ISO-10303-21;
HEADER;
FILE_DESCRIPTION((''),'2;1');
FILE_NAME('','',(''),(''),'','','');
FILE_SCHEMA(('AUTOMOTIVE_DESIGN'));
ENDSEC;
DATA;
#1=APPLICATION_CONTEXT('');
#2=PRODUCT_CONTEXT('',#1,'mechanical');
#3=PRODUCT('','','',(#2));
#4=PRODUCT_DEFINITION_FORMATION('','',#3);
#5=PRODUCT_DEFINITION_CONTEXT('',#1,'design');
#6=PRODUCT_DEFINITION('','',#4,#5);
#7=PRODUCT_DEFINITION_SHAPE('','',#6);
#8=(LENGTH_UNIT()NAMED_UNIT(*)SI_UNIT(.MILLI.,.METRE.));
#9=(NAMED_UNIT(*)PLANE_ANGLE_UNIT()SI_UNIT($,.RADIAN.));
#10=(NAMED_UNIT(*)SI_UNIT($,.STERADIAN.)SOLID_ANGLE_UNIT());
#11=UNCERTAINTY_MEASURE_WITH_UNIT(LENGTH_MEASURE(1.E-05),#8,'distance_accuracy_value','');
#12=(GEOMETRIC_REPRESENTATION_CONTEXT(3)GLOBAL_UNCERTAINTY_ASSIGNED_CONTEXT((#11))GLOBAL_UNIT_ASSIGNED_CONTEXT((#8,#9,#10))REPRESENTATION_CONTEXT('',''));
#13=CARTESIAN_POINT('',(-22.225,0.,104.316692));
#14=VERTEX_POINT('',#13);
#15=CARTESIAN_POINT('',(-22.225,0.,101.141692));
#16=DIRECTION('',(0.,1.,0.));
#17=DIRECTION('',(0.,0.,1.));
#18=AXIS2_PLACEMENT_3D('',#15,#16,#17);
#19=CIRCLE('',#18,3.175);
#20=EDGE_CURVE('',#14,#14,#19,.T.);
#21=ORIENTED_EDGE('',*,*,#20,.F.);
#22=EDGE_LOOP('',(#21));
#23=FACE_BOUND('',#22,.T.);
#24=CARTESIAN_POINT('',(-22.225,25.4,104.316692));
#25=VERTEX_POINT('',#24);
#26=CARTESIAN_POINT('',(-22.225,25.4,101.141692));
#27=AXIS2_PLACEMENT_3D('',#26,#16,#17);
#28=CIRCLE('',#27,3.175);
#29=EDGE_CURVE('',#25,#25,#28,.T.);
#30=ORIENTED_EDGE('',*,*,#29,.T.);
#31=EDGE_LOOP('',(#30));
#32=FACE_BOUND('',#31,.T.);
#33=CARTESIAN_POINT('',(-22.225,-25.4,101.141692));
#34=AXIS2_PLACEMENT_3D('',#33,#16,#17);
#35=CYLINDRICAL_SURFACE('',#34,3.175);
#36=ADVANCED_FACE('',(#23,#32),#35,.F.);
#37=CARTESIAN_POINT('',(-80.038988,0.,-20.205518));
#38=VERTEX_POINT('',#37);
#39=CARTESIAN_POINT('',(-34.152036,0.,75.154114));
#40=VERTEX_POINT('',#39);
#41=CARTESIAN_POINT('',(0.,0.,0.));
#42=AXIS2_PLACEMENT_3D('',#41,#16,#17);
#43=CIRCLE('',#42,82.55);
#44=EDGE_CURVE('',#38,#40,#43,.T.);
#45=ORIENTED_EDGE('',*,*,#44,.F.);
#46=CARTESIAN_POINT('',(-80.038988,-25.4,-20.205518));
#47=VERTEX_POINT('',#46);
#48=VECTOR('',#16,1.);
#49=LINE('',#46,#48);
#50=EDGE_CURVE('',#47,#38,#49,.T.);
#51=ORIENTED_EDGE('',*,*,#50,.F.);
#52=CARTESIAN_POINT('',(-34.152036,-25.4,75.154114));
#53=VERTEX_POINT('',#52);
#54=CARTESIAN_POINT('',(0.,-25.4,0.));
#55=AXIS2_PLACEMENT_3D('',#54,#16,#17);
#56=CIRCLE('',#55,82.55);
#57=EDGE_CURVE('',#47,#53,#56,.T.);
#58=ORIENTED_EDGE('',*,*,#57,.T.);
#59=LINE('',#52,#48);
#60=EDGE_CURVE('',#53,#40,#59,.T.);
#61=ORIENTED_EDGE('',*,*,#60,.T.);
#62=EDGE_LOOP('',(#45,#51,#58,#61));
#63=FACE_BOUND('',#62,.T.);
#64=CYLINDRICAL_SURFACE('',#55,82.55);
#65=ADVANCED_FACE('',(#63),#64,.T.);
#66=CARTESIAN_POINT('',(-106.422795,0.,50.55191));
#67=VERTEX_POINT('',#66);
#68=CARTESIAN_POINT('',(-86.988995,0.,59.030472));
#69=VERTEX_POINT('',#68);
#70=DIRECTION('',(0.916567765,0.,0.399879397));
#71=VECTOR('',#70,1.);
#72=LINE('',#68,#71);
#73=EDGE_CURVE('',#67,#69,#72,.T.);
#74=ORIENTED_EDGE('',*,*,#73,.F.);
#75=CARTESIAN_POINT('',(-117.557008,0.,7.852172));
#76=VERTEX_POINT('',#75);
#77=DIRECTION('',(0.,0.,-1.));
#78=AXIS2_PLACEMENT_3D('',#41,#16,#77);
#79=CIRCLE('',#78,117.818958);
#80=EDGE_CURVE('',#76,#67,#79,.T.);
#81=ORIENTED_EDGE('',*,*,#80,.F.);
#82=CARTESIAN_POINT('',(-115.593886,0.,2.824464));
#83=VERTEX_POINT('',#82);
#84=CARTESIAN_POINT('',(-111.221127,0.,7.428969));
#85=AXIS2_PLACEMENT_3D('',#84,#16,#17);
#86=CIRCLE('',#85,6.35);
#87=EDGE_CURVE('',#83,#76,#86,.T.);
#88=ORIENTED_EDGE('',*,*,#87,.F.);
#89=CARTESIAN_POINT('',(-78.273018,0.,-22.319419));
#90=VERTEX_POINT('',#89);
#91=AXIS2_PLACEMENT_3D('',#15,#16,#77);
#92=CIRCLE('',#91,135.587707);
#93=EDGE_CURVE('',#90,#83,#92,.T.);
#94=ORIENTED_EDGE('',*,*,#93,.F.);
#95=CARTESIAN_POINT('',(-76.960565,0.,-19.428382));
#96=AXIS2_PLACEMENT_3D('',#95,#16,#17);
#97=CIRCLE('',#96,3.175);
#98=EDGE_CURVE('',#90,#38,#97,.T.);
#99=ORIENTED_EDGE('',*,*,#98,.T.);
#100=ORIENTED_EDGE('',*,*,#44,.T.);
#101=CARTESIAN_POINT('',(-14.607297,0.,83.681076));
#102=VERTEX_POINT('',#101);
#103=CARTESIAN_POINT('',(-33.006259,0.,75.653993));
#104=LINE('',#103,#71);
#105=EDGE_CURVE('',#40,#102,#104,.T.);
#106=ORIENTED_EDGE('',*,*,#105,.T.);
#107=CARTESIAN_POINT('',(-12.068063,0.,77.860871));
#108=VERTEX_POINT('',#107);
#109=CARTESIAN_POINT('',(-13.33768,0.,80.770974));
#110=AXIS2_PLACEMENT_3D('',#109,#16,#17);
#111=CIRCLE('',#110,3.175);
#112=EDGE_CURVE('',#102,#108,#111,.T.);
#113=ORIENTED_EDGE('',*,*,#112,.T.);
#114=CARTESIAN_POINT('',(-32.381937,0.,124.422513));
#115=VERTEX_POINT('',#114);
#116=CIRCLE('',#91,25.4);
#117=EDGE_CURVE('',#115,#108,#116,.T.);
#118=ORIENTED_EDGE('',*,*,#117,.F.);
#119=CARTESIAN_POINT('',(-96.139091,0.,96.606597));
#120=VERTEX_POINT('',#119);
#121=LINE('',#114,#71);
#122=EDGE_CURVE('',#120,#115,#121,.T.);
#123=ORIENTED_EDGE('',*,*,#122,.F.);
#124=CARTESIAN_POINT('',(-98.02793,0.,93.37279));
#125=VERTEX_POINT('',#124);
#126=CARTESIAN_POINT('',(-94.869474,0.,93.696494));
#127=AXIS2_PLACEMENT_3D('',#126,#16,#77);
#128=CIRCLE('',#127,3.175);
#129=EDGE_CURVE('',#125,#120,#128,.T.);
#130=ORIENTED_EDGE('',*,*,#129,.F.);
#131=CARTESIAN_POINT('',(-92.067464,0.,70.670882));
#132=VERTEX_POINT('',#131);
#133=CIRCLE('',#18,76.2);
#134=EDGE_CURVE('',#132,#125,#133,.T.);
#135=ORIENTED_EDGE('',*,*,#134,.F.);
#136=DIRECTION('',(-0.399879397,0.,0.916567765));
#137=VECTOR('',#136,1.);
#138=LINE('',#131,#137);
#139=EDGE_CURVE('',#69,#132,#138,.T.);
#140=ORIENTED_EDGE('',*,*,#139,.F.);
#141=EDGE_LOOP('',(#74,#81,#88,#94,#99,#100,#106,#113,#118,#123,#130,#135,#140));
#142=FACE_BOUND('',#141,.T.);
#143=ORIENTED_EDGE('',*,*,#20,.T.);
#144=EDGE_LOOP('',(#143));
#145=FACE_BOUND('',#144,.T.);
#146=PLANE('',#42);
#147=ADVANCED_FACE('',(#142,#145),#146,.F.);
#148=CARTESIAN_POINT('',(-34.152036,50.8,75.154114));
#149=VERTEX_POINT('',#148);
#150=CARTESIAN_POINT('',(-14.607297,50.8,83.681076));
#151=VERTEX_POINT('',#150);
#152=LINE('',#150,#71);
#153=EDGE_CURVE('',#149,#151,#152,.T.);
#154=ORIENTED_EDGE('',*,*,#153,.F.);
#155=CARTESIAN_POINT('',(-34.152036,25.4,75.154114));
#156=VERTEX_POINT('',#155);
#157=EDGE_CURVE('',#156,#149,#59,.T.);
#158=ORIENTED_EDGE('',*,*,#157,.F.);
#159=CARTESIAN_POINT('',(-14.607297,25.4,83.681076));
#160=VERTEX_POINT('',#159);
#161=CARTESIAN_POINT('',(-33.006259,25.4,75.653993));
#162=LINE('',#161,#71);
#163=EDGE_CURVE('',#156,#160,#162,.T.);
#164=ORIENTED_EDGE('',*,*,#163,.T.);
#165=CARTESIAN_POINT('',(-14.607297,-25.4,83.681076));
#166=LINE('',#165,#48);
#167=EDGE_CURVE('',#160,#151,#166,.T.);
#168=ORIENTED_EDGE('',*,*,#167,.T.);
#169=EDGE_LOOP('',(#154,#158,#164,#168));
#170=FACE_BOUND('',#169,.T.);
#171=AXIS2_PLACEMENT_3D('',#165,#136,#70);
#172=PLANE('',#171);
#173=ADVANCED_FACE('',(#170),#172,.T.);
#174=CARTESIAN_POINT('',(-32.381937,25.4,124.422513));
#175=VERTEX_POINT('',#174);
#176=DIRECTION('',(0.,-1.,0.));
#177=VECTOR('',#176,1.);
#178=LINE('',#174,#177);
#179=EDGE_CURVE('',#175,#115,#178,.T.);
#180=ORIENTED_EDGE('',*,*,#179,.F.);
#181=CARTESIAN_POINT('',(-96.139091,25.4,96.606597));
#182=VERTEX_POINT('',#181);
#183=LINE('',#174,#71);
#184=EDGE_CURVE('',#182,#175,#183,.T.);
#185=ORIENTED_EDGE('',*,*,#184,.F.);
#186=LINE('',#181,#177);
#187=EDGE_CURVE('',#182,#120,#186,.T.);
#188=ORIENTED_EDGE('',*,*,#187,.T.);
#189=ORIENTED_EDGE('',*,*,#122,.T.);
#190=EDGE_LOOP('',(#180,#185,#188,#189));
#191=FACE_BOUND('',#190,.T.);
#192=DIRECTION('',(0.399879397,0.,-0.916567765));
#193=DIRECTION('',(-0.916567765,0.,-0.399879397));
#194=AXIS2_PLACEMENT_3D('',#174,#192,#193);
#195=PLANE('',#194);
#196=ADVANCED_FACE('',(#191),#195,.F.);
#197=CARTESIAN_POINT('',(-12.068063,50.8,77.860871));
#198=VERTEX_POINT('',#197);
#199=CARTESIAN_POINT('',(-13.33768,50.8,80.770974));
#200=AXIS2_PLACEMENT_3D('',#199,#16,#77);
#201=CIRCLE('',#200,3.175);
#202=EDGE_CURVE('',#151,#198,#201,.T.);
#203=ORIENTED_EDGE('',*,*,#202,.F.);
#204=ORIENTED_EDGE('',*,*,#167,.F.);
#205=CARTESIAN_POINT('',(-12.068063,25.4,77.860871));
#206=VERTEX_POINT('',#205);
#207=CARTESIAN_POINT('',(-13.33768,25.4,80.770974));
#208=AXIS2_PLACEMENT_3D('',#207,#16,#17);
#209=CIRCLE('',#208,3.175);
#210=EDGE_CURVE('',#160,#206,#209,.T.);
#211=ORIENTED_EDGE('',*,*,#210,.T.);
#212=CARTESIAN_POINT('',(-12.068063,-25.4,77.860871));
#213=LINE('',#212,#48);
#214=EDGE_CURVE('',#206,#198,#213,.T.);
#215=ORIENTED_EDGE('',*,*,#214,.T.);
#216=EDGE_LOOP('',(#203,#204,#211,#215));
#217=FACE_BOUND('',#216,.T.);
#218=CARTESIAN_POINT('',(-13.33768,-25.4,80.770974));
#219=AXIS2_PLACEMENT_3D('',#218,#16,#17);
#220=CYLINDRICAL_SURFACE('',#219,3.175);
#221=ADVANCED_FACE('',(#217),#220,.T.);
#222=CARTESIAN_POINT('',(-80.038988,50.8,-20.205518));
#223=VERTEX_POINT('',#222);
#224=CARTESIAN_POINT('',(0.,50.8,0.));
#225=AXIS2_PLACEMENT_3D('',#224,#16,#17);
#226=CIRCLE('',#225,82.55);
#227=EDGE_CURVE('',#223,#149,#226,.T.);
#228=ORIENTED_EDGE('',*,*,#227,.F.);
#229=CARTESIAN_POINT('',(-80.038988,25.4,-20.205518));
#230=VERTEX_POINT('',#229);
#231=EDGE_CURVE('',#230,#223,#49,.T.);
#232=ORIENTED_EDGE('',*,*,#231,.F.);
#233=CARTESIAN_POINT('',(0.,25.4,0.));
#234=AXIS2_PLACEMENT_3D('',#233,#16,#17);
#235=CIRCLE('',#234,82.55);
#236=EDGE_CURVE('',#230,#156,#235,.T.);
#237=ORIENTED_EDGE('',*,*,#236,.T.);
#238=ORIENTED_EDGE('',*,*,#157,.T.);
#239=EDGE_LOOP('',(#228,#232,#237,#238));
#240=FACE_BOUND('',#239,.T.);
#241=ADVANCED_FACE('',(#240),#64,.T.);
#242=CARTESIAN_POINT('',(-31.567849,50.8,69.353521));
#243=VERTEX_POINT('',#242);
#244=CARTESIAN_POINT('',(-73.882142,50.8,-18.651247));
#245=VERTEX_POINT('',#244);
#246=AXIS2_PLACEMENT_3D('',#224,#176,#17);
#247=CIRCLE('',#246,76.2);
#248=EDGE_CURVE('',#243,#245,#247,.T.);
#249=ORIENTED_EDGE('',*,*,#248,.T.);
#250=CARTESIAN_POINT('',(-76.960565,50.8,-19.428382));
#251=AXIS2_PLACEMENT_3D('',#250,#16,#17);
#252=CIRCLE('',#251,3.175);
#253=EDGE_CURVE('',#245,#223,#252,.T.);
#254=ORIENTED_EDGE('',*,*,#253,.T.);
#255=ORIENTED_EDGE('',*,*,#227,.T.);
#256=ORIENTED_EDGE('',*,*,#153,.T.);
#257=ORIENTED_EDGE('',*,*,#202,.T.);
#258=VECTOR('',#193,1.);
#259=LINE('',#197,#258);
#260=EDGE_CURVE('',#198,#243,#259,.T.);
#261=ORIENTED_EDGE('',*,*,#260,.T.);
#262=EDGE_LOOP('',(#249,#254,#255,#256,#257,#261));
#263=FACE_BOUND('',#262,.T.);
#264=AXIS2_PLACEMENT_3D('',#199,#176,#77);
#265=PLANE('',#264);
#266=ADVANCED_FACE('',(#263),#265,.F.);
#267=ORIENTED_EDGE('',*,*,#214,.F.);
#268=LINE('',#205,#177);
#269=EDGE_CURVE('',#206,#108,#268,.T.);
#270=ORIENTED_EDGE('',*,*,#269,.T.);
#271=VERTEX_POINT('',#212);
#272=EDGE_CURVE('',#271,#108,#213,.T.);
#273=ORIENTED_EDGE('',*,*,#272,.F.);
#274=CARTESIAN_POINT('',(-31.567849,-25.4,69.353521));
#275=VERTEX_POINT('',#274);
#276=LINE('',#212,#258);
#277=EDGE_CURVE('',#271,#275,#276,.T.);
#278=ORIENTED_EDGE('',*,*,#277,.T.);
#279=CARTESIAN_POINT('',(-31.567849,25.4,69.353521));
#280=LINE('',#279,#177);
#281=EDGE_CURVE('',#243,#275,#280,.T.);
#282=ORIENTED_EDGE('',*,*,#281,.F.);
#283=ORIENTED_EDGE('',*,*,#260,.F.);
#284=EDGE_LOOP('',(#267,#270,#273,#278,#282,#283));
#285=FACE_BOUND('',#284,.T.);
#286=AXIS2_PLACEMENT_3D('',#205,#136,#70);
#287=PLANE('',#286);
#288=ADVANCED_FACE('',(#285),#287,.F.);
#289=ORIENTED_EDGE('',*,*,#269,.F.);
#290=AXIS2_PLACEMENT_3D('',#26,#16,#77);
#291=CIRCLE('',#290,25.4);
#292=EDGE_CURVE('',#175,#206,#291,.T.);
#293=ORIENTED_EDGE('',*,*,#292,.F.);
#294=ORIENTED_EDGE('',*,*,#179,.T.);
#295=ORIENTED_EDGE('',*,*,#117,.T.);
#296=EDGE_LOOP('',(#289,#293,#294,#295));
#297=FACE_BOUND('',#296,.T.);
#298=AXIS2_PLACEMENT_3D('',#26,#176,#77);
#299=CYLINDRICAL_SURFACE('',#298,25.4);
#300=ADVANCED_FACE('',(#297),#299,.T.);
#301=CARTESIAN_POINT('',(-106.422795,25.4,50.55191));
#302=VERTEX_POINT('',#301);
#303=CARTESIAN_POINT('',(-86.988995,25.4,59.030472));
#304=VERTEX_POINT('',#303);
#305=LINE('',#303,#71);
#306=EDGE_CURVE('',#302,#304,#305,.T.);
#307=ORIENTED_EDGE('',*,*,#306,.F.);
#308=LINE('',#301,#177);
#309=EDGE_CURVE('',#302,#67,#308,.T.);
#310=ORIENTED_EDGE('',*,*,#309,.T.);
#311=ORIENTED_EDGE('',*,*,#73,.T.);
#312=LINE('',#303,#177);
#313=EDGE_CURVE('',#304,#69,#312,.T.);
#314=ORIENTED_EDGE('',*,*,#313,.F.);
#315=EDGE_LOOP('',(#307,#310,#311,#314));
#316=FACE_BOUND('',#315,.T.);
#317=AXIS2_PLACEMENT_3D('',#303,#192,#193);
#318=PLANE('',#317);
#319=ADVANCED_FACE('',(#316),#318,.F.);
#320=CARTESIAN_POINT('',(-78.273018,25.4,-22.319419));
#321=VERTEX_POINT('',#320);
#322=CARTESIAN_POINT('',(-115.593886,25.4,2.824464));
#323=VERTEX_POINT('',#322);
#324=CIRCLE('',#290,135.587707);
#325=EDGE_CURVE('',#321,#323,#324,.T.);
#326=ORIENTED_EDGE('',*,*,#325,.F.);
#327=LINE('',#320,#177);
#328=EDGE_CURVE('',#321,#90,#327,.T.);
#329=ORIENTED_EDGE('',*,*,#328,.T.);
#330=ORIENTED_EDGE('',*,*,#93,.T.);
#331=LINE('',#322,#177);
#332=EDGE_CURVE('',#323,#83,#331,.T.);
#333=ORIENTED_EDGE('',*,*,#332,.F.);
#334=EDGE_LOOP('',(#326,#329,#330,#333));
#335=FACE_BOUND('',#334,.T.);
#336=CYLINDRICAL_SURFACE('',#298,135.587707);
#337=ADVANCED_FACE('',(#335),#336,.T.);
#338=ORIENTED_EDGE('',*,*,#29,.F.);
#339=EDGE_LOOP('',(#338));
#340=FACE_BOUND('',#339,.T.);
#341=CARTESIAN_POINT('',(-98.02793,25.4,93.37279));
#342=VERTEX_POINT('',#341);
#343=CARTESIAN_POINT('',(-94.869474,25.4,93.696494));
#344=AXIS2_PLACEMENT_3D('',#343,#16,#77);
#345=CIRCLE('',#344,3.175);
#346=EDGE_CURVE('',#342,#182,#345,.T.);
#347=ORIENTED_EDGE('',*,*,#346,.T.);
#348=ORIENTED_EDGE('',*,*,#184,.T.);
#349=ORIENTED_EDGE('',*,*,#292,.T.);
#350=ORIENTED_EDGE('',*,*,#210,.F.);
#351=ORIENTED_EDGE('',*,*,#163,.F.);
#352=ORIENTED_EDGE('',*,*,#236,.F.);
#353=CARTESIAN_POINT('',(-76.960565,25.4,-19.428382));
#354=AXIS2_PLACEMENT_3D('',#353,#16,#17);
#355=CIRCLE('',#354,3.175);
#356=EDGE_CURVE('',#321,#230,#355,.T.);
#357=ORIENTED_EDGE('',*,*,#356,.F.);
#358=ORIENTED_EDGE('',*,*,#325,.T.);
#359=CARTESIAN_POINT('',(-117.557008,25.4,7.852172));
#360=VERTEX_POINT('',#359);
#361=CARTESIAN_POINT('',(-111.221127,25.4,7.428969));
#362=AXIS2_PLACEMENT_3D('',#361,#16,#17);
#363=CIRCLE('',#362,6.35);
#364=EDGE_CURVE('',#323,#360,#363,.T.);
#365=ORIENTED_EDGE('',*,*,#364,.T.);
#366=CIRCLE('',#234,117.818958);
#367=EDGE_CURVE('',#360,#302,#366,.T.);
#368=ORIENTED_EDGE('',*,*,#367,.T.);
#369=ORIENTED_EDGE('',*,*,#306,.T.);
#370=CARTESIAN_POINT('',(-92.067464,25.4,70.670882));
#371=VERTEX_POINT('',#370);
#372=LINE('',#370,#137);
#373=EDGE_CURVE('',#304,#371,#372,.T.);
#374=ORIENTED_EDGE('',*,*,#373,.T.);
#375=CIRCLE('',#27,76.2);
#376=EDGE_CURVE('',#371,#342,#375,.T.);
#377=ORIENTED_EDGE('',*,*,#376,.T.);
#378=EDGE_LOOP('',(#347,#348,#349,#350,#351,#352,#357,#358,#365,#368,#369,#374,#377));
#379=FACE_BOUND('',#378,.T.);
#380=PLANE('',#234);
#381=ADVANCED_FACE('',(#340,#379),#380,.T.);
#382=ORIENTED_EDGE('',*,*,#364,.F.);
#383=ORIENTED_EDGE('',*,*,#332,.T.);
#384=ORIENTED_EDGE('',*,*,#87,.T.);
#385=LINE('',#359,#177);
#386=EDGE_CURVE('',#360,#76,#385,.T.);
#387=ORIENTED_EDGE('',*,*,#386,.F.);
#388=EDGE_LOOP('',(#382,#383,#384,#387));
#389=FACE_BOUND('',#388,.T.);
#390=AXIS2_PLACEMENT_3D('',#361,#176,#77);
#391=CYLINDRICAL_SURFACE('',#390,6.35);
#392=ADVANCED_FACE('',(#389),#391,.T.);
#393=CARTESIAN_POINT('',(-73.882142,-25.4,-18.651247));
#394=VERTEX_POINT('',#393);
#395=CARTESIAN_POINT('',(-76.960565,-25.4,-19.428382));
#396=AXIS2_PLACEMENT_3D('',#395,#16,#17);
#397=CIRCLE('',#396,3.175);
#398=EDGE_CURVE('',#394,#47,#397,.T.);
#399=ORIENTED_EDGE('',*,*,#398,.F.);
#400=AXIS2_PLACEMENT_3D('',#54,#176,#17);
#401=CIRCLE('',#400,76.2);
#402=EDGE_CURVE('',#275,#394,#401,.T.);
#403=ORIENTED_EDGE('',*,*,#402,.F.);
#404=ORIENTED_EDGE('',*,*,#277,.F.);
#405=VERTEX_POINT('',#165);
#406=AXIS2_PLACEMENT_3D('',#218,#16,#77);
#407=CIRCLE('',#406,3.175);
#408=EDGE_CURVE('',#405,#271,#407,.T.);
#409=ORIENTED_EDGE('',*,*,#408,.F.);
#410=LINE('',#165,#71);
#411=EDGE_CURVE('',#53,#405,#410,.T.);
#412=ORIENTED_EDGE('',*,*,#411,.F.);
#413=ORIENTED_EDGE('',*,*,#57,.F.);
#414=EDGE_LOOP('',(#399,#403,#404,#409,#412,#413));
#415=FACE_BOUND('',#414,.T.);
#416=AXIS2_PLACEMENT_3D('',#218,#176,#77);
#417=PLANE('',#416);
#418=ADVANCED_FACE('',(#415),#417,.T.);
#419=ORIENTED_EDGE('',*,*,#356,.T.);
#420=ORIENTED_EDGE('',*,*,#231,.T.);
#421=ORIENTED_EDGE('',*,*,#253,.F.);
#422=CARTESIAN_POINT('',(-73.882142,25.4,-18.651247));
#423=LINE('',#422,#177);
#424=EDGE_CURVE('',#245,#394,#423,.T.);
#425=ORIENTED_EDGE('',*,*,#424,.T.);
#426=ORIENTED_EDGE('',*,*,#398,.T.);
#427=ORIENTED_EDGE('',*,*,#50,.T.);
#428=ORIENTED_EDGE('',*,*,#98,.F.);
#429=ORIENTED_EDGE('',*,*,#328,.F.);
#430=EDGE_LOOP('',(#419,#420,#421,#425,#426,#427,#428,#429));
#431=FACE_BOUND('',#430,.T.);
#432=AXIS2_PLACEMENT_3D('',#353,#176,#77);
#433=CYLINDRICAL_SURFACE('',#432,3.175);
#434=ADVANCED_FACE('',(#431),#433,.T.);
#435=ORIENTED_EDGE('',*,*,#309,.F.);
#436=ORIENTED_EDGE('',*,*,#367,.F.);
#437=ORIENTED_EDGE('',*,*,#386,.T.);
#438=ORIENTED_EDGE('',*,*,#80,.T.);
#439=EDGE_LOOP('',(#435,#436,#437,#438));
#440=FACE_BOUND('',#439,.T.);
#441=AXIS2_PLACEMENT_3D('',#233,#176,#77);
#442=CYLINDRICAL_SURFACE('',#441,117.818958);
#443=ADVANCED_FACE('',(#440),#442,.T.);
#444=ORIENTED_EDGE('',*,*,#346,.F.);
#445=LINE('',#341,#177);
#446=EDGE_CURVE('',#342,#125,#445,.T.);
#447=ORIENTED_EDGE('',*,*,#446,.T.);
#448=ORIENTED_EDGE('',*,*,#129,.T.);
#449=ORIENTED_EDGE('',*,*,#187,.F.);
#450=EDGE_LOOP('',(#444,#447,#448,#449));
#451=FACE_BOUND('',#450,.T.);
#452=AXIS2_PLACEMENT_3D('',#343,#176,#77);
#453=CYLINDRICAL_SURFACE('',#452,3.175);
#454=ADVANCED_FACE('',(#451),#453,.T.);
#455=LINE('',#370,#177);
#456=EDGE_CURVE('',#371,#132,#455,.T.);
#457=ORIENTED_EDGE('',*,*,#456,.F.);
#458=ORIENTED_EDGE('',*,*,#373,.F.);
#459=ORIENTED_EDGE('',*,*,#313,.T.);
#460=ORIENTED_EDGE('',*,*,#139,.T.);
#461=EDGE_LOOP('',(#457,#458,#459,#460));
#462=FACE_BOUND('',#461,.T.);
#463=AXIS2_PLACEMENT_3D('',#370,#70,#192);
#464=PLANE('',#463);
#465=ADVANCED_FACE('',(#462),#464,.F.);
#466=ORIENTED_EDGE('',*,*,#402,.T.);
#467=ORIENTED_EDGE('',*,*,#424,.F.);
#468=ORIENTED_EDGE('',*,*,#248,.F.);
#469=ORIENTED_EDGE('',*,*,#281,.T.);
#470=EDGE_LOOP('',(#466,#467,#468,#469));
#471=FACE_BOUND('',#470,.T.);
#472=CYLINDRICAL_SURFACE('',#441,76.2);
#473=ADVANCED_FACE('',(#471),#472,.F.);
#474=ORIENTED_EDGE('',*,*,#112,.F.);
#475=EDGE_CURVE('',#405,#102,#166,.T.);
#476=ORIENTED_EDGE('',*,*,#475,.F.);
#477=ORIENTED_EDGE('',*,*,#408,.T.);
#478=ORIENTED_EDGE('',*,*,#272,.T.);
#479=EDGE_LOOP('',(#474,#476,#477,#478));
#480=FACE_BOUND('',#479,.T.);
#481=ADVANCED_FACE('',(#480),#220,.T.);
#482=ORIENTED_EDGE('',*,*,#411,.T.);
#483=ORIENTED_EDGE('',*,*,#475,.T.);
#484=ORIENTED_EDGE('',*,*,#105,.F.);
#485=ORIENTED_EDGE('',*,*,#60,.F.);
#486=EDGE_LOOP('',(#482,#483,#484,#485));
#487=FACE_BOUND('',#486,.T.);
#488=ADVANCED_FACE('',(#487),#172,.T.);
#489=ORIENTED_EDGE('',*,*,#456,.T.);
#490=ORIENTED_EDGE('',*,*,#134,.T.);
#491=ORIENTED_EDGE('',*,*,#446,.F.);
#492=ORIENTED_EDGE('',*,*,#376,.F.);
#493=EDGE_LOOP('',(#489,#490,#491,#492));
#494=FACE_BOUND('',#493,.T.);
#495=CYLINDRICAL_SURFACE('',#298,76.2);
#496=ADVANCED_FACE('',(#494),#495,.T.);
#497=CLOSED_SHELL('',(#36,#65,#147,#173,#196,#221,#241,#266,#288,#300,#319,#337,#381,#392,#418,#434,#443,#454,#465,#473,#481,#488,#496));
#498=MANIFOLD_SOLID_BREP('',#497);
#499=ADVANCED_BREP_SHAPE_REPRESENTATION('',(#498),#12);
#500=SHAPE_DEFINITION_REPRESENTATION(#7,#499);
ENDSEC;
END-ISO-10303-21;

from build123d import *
from build123d.topology import SkipClean

# Parameters (mm, degrees)
BOSS_EXTRU_1_DEPTH      = 25.4
BOSS_EXTRU_3_DEPTH      = 25.4
BOSS_EXTRU_3_DEPTH_BACK = 50.8
ESQUISSE4_R             = 3.175
ENL_V_MAT_EXTRU_2_DEPTH = 181.045576616


with BuildPart() as part:
    # Esquisse1 → Boss.-Extru.1 (new body)
    with BuildSketch(Plane(origin=(0, 0, 0), x_dir=(1, 0, 0), z_dir=(0, 1, 0))):
        with BuildLine():
            Line((-86.988995356, -59.030471555), (-106.422794534, -50.551910349))
            ThreePointArc((-106.422794534, -50.551910349), (-109.945906268, -42.346245775), (-112.837401426, -33.897310746))
            ThreePointArc((-112.837401426, -33.897310746), (-115.930942089, -21.007701033), (-117.557008422, -7.852172131))
            ThreePointArc((-117.557008422, -7.852172131), (-117.13621005, -5.119362004), (-115.593885954, -2.824463565))
            ThreePointArc((-115.593885954, -2.824463565), (-97.983870719, 11.30660622), (-78.273017823, 22.319419119))
            ThreePointArc((-78.273017823, 22.319419119), (-74.924997914, 21.864997198), (-73.882142487, 18.651247184))
            ThreePointArc((-73.882142487, 18.651247184), (-68.674121781, -33.019766772), (-31.56784929, -69.353521116))
            Line((-31.56784929, -69.353521116), (-12.068063318, -77.860870983))
            ThreePointArc((-12.068063318, -77.860870983), (1.055821232, -111.298628897), (-32.381936682, -124.422513448))
            Line((-32.381936682, -124.422513448), (-96.139091412, -96.606596769))
            ThreePointArc((-96.139091412, -96.606596769), (-97.611067531, -95.297834712), (-98.027929733, -93.37278985))
            ThreePointArc((-98.027929733, -93.37278985), (-95.927030568, -81.790963802), (-92.067463697, -70.670882171))
            Line((-92.067463697, -70.670882171), (-86.988995356, -59.030471555))
        make_face()
    extrude(amount=BOSS_EXTRU_1_DEPTH)

    # Esquisse2 → Boss.-Extru.3 (add, two sides: drawn at the far end of the back side and taken through both)
    with SkipClean():  # the faces are left unmerged after this step: merging them gives an invalid solid
        with BuildSketch(Plane(origin=(0, 25.4, 0), x_dir=(1, 0, 0), z_dir=(0, 1, 0)).offset(-BOSS_EXTRU_3_DEPTH_BACK)):
            with BuildLine():
                Line((-12.068063318, -77.860870983), (-31.56784929, -69.353521116))
                ThreePointArc((-31.56784929, -69.353521116), (-68.674121781, -33.019766772), (-73.882142487, 18.651247184))
                ThreePointArc((-73.882142487, 18.651247184), (-76.183429791, 22.506805087), (-80.038987694, 20.205517783))
                ThreePointArc((-80.038987694, 20.205517783), (-74.38590155, -35.794415076), (-34.152036158, -75.1541145))
                Line((-34.152036158, -75.1541145), (-14.607297489, -83.681076291))
                ThreePointArc((-14.607297489, -83.681076291), (-10.42757775, -82.040590723), (-12.068063318, -77.860870983))
            make_face()
        extrude(amount=BOSS_EXTRU_3_DEPTH + BOSS_EXTRU_3_DEPTH_BACK)
    add(part.part.scale(1), mode=Mode.REPLACE)  # the faces are merged on a copy

    # Esquisse4 → Enlèv. mat.-Extru.2 (cut, through all)
    with BuildSketch(Plane(origin=(0, 25.4, 0), x_dir=(1, 0, 0), z_dir=(0, 1, 0))):
        with Locations((-22.225, -101.141692216)):
            Circle(ESQUISSE4_R)
    extrude(amount=-ENL_V_MAT_EXTRU_2_DEPTH, mode=Mode.SUBTRACT)


solid = part.part
